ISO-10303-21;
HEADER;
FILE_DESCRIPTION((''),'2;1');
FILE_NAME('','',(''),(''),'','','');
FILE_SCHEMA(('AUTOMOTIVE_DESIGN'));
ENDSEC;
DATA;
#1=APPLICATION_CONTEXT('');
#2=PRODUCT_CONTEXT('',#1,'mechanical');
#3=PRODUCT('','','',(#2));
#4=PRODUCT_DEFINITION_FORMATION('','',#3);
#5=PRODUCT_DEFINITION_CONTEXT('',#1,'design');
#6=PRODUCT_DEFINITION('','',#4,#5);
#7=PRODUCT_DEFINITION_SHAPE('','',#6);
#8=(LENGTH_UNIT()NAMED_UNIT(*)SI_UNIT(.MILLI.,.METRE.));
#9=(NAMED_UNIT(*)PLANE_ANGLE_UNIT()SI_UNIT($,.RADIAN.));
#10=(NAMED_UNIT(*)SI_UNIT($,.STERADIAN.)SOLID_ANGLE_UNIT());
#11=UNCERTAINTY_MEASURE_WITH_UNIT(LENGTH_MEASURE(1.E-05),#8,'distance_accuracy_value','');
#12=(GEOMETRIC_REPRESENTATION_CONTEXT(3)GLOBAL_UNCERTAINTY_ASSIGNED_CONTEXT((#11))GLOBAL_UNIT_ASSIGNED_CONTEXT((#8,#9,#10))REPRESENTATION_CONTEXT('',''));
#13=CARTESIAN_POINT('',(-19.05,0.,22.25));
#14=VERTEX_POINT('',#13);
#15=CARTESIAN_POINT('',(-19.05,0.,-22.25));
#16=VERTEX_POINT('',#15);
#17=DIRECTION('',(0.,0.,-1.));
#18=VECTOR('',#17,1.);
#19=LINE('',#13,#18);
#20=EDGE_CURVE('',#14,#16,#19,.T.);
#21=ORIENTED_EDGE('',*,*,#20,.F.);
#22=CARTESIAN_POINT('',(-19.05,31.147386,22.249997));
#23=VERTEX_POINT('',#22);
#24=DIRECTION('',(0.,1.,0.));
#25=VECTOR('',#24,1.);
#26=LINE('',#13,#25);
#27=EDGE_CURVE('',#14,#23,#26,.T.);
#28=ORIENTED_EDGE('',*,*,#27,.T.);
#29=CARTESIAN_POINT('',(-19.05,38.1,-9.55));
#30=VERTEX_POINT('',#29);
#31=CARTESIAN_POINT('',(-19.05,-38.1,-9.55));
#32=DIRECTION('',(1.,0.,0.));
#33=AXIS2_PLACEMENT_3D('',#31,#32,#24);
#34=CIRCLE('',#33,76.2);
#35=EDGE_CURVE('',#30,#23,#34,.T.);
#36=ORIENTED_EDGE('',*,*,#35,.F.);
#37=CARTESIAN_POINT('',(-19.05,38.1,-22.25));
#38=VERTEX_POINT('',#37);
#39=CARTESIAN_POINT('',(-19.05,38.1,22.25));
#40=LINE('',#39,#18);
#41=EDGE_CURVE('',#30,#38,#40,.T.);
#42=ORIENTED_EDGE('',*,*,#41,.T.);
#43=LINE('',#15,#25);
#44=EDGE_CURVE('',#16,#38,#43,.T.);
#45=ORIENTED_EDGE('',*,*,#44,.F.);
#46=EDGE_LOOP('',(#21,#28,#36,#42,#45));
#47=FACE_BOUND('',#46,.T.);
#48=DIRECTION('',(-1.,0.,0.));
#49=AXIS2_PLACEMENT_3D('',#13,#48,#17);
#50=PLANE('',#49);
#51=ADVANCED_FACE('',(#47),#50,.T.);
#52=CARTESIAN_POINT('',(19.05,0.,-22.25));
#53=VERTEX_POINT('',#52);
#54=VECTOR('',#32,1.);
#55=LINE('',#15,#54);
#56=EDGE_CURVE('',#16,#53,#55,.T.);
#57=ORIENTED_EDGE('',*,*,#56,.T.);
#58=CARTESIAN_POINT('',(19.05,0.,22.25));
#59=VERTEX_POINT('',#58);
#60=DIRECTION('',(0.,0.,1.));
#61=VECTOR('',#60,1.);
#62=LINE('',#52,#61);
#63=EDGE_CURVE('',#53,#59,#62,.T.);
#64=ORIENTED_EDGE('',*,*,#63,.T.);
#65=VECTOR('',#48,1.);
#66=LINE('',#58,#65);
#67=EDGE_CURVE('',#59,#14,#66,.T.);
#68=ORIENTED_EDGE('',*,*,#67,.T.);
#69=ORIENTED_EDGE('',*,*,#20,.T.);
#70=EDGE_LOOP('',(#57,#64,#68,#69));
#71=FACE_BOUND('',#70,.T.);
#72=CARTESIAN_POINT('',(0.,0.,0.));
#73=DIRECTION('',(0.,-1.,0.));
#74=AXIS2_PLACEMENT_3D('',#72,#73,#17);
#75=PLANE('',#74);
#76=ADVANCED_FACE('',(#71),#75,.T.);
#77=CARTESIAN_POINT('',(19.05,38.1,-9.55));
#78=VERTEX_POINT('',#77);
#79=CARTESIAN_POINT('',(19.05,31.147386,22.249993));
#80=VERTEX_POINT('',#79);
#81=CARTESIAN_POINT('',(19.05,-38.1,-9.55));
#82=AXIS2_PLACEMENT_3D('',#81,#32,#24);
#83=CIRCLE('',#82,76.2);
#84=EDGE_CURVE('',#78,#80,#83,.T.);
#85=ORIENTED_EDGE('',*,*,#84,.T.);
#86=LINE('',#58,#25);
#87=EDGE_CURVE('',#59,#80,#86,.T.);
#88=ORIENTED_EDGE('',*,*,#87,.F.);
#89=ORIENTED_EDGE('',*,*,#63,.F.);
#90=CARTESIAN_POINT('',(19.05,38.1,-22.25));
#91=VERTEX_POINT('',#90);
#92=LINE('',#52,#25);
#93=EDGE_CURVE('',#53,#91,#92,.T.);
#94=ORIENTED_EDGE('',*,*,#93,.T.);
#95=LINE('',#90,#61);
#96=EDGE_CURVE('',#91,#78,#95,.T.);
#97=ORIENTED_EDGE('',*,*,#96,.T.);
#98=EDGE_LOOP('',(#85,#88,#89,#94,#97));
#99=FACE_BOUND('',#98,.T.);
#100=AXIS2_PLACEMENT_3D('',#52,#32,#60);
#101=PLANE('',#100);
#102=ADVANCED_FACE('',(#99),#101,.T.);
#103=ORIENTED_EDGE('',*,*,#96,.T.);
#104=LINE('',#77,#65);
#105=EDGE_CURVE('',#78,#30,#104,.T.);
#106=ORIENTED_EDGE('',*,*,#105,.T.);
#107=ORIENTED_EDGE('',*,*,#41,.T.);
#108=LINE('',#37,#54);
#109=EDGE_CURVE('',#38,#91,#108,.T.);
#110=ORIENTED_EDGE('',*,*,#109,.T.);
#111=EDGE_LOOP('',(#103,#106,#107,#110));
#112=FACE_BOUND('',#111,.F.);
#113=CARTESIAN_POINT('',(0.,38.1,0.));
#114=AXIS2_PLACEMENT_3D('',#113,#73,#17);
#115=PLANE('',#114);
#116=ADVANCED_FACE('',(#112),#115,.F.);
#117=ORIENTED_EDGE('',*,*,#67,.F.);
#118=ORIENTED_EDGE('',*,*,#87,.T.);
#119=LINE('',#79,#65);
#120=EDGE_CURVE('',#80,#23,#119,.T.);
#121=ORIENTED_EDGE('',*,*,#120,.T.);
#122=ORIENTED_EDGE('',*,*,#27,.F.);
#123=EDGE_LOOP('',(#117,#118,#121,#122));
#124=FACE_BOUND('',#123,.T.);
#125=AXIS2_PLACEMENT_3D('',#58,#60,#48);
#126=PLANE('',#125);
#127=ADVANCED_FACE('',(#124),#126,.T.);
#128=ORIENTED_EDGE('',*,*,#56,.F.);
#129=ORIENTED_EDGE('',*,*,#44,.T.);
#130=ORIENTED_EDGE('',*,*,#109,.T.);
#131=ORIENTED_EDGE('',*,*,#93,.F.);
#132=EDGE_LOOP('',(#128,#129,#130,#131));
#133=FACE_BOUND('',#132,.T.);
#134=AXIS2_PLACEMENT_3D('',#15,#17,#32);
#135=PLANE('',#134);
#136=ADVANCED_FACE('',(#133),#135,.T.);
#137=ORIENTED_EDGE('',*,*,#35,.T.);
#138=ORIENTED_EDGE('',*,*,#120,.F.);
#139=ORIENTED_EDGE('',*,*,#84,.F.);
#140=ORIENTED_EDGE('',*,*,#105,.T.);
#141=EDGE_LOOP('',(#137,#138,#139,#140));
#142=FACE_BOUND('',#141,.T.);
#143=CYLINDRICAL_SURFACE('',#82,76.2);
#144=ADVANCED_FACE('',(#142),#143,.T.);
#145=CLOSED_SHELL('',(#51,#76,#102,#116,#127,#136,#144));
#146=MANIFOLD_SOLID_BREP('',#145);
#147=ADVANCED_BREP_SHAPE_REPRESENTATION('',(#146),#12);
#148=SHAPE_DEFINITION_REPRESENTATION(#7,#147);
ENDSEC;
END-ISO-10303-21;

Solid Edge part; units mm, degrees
sketch "Sketch1" plane through (0, 0, 0) normal (0, -1, 0) x (1, 0, 0)
  line L0 (19.05, 22.25) -> (-19.05, 22.25)
  line L1 (-19.05, 22.25) -> (-19.05, -22.25)
  line L2 (-19.05, -22.25) -> (19.05, -22.25)
  line L3 (19.05, -22.25) -> (19.05, 22.25)
extrude "Protrusion1" add sketch "Sketch1" against normal blind 38.1
sketch "Sketch2" plane through (19.05, 19.05, 0) normal (1, 0, 0) x (0, 1, 0)
  line L0 (12.0974, 22.25) -> (19.05, 22.25)
  line L1 (19.05, 22.25) -> (19.05, -9.55)
  arc A0 (19.05, -9.55) -> (12.0974, 22.25) centre (-57.15, -9.55) ccw
extrude "ExtrudedCutout_2" cut sketch "Sketch2" against normal blind 42
